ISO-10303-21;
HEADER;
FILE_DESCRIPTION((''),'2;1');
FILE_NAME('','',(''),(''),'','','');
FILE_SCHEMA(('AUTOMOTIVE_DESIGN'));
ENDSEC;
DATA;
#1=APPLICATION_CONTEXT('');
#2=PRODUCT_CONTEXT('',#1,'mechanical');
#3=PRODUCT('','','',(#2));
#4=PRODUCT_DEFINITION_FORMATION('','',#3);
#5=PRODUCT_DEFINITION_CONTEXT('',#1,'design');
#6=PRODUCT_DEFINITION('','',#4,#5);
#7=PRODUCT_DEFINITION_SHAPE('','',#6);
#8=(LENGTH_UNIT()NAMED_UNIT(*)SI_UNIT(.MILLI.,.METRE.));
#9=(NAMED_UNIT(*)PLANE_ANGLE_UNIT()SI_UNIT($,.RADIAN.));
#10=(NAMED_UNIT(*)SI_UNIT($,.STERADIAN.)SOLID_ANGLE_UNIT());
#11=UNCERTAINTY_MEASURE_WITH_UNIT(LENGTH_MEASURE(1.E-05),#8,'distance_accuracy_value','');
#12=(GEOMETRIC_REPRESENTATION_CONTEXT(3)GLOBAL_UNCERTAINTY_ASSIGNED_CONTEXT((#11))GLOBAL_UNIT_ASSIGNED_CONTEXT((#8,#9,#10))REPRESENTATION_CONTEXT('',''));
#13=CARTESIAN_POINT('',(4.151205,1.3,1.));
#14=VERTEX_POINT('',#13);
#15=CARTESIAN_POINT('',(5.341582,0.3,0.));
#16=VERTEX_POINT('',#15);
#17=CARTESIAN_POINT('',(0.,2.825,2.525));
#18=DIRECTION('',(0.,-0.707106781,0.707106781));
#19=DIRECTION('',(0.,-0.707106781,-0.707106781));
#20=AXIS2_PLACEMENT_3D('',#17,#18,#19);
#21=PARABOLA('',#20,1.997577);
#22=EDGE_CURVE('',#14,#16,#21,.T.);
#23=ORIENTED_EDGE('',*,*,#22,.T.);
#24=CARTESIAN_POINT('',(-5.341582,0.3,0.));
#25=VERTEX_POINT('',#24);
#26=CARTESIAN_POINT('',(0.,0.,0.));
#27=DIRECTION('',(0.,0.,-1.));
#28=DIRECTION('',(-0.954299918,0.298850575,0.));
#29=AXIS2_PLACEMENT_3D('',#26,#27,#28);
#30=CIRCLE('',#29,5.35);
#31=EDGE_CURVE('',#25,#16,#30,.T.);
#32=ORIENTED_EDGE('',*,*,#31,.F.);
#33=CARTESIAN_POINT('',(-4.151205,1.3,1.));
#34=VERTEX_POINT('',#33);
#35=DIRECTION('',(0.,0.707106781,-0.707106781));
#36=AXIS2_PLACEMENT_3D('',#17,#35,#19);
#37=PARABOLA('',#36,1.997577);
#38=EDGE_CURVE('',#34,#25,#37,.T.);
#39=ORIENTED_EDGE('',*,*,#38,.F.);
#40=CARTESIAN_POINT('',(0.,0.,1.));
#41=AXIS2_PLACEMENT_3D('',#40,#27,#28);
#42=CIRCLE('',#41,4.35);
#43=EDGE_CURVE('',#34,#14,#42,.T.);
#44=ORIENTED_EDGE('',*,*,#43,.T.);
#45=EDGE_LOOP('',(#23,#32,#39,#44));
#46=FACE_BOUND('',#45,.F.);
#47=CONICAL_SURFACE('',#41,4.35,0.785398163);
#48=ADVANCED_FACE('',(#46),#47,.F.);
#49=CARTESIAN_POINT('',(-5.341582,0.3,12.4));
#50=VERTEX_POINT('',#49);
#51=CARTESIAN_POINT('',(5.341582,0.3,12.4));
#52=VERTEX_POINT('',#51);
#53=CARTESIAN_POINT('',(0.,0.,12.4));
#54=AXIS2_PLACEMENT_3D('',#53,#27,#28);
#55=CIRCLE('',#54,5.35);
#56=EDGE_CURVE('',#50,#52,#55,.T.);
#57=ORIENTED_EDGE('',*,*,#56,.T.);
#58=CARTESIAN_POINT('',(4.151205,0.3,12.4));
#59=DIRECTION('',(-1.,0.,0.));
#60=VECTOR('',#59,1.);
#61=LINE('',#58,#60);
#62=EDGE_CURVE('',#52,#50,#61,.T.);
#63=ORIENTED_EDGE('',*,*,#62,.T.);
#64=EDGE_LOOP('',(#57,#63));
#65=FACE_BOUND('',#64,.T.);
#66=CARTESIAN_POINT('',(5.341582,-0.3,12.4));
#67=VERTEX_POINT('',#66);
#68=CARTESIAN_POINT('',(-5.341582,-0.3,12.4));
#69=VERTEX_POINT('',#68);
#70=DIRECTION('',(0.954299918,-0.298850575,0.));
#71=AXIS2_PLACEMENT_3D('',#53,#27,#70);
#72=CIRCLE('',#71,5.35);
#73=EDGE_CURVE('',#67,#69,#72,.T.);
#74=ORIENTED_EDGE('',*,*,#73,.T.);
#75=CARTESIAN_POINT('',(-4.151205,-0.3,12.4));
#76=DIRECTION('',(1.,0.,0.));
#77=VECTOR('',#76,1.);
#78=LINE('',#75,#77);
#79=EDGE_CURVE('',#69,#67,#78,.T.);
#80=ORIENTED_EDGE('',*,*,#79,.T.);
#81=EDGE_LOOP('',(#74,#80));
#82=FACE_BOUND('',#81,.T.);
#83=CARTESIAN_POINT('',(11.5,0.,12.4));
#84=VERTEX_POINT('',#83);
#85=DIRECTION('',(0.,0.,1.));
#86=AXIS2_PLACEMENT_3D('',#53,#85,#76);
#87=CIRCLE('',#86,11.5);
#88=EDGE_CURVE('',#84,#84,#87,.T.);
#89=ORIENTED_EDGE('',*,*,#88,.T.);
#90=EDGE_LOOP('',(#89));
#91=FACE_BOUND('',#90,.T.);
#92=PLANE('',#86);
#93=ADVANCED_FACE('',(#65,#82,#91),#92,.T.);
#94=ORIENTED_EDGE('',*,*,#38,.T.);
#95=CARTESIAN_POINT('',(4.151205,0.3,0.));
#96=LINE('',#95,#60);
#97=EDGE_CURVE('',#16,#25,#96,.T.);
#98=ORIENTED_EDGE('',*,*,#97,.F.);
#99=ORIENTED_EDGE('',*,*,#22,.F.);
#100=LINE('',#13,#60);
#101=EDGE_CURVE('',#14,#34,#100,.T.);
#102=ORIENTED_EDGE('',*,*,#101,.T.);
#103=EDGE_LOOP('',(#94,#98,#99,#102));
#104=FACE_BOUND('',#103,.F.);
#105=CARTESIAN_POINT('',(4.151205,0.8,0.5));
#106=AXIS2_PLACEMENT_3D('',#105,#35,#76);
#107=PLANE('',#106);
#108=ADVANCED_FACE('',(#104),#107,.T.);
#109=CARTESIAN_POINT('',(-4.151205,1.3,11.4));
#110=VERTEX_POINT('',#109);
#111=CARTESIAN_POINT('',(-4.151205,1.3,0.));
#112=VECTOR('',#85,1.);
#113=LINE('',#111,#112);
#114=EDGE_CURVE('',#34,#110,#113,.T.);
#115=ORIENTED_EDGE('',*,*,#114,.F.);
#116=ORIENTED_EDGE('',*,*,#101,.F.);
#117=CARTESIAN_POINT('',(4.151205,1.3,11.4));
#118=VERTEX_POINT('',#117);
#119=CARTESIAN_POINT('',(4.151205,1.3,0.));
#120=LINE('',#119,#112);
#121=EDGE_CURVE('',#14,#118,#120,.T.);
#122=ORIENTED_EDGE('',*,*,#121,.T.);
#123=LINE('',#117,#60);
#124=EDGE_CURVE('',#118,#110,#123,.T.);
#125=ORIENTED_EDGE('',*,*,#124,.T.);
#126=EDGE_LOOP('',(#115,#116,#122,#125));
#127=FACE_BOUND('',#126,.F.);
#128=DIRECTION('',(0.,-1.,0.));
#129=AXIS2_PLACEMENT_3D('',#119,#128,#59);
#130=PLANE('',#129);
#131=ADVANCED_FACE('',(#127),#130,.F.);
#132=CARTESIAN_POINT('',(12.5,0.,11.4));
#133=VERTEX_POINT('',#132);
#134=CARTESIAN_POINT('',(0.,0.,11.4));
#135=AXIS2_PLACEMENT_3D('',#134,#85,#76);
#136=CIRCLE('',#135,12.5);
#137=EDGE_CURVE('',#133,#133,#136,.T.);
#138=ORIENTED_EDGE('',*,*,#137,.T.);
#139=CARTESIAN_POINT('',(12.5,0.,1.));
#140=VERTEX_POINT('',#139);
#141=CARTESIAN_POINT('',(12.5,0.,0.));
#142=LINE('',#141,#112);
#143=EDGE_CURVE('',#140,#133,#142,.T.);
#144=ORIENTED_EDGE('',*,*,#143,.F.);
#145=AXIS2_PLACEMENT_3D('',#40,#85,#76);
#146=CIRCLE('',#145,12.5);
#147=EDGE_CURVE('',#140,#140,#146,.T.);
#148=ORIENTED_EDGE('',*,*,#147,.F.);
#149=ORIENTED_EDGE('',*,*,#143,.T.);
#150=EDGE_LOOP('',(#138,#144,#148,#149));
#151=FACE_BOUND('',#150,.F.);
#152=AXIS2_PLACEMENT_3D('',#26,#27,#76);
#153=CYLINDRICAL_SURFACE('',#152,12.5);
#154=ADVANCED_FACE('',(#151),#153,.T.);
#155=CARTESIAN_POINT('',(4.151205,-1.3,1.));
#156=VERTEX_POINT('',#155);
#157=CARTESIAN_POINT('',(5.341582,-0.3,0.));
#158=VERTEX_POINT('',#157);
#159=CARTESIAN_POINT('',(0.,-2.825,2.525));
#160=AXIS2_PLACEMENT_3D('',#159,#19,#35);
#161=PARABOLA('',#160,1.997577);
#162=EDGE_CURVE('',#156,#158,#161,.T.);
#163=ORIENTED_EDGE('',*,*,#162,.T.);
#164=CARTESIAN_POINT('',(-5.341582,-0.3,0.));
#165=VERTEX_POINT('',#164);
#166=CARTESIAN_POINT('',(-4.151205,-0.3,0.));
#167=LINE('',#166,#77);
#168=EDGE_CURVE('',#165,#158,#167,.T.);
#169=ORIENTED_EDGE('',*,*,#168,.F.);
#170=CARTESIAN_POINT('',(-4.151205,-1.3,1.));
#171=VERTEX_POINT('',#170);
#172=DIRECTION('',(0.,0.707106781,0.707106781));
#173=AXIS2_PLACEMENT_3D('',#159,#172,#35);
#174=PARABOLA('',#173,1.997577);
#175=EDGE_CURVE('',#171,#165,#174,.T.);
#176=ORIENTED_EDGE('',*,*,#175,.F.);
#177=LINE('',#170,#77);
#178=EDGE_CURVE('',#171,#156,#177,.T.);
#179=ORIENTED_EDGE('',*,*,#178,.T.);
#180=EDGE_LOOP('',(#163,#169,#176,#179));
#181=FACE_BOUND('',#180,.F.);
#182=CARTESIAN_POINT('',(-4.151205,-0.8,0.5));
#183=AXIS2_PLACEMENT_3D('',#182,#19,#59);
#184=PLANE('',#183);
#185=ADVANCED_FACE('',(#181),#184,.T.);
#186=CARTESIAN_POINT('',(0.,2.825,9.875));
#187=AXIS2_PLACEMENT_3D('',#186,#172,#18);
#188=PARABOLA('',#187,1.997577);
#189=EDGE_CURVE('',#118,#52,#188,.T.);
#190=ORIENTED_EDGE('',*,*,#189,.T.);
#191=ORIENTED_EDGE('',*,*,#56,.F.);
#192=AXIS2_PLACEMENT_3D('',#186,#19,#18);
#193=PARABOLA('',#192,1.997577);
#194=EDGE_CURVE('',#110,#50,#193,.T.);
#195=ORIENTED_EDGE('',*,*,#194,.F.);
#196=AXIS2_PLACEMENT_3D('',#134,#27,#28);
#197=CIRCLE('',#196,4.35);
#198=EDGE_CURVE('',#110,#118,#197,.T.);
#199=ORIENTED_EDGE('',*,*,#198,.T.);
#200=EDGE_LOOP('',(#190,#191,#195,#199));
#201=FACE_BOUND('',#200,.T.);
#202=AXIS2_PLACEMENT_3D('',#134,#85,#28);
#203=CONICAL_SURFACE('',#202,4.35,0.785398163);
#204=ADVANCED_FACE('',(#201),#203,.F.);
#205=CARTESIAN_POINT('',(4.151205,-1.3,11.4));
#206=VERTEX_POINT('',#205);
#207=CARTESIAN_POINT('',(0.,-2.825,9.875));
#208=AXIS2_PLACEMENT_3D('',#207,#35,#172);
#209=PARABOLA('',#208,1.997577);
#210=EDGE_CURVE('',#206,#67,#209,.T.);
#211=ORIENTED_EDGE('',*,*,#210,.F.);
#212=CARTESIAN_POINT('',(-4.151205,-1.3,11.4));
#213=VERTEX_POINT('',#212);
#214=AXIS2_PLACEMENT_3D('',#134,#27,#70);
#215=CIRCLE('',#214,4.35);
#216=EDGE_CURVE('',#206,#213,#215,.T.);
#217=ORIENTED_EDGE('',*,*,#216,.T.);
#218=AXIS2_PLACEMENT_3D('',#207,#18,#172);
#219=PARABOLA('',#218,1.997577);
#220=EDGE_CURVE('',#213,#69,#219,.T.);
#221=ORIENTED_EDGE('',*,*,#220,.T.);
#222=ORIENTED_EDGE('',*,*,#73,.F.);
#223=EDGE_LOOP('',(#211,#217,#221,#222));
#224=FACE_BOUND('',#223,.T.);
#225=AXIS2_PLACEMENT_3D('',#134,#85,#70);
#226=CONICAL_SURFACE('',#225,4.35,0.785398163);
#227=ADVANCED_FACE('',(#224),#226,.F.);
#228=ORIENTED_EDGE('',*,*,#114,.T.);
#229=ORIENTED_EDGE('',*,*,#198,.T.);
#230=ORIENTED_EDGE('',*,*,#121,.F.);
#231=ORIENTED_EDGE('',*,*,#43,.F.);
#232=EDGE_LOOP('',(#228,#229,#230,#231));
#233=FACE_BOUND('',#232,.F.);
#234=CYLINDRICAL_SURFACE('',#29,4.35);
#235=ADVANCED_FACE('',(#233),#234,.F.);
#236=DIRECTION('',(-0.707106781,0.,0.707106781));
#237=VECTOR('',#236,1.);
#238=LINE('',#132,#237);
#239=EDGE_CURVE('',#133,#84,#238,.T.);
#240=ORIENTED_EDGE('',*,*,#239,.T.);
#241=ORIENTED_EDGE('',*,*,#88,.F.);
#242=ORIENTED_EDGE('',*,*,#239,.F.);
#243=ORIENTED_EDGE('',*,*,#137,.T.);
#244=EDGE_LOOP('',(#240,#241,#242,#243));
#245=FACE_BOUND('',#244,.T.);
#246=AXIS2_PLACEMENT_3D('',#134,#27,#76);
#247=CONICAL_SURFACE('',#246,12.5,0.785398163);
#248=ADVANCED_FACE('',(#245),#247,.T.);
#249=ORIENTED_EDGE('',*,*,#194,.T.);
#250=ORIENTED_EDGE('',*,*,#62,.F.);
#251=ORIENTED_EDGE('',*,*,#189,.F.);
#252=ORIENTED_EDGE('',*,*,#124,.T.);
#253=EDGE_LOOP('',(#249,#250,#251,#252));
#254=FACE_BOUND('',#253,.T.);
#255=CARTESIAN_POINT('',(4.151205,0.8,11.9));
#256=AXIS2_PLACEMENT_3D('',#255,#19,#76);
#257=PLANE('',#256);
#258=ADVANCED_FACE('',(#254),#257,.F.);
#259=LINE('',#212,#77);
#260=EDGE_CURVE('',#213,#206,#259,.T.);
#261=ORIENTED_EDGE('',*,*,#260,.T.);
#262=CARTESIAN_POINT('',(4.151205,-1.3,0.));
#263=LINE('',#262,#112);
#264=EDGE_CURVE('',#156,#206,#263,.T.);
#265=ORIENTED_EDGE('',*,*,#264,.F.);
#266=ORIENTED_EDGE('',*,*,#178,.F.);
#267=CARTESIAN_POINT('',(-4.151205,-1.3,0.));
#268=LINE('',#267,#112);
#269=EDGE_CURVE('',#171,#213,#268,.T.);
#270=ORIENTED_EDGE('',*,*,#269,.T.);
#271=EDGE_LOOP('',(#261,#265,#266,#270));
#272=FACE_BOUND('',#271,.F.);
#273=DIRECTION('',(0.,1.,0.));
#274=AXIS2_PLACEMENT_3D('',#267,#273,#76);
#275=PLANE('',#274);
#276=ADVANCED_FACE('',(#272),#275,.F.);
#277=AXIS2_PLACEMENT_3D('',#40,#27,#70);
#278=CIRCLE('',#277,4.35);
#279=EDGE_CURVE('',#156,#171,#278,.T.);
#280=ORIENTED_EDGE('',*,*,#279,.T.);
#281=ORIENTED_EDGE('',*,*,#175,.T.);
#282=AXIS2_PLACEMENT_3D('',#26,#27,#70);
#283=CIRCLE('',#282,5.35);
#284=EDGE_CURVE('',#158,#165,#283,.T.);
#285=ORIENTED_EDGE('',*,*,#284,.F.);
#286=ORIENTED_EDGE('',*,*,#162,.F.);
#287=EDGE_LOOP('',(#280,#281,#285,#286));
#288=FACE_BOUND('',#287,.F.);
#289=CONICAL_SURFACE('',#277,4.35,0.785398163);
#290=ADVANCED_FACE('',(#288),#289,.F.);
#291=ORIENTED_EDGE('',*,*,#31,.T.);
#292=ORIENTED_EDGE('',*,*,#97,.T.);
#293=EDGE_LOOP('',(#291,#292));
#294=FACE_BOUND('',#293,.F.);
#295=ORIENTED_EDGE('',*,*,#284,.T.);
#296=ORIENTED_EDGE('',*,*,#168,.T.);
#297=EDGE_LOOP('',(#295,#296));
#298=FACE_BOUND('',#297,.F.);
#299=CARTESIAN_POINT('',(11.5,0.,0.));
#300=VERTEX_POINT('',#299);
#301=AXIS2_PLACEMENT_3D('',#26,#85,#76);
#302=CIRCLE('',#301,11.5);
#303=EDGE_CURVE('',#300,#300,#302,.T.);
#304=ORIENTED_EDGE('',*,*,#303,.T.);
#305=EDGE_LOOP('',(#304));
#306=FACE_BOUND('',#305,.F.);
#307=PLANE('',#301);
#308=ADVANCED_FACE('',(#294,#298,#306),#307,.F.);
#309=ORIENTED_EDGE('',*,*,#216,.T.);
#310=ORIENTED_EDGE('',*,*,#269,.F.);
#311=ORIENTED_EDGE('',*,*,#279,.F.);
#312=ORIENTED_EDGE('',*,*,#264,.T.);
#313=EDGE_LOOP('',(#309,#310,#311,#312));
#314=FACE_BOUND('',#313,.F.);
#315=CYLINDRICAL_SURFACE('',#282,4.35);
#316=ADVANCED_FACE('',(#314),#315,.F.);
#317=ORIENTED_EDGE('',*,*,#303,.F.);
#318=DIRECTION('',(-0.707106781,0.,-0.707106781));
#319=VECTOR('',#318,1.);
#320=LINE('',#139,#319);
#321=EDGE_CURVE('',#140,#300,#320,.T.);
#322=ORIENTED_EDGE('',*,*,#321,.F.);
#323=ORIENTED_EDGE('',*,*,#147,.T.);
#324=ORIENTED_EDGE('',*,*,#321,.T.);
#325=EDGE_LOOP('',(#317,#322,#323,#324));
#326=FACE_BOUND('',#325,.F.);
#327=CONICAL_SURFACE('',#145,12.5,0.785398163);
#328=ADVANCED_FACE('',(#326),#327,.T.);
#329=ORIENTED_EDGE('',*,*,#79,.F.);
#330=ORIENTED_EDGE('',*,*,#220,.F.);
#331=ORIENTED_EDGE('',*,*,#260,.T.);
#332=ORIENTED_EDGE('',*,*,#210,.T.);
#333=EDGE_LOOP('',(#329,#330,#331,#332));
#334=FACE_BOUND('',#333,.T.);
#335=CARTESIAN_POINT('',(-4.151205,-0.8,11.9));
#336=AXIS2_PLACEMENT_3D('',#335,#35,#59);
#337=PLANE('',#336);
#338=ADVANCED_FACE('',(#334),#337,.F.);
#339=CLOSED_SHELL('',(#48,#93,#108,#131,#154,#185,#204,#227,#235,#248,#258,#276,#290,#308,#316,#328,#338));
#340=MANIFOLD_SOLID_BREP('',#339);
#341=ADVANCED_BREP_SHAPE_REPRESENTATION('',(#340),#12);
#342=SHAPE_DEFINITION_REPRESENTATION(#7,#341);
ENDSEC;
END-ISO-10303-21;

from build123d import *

# Parameters (mm, degrees)
F0_R     = 12.5
F1_DEPTH = 12.4
F2_SIZE  = 1


with BuildPart() as f1:
    # F0 (on Top) → F1 (new body)
    with BuildSketch(Plane.XY):
        Circle(F0_R)
        with BuildLine():
            ThreePointArc((-4.1512046444, 1.3), (0, 4.35), (4.1512046444, 1.3))
            Line((4.1512046444, 1.3), (5, 1.3))
            Line((5, 1.3), (5, -1.3))
            Line((5, -1.3), (4.1512046444, -1.3))
            ThreePointArc((4.1512046444, -1.3), (0, -4.35), (-4.1512046444, -1.3))
            Line((-4.1512046444, -1.3), (-5, -1.3))
            Line((-5, -1.3), (-5, 1.3))
            Line((-5, 1.3), (-4.1512046444, 1.3))
        make_face(mode=Mode.SUBTRACT)
        with BuildLine():
            ThreePointArc((4.1512046444, -1.3), (4.3000139653, -0.657556004), (4.35, 0))
            ThreePointArc((4.35, 0), (4.3000139653, 0.657556004), (4.1512046444, 1.3))
            Line((4.1512046444, 1.3), (-4.1512046444, 1.3))
            ThreePointArc((-4.1512046444, 1.3), (-4.35, 0), (-4.1512046444, -1.3))
            Line((-4.1512046444, -1.3), (4.1512046444, -1.3))
        make_face()
        with BuildLine():
            ThreePointArc((4.1512046444, 1.3), (4.3000139653, 0.657556004), (4.35, 0))
            ThreePointArc((4.35, 0), (4.3000139653, -0.657556004), (4.1512046444, -1.3))
            Line((4.1512046444, -1.3), (5, -1.3))
            Line((5, -1.3), (5, 1.3))
            Line((5, 1.3), (4.1512046444, 1.3))
        make_face()
        with BuildLine():
            ThreePointArc((-4.1512046444, -1.3), (-4.35, 0), (-4.1512046444, 1.3))
            Line((-4.1512046444, 1.3), (-5, 1.3))
            Line((-5, 1.3), (-5, -1.3))
            Line((-5, -1.3), (-4.1512046444, -1.3))
        make_face()
    extrude(amount=F1_DEPTH)

    # F2
    f2_edges = [f1.edges().sort_by_distance(p)[0] for p in [
        (-12.5, 0, 12.4),
        (0, -4.35, 12.4),
        (0, -1.3, 12.4),
        (0, 1.3, 12.4),
        (0, 4.35, 12.4),
        (-12.5, 0, 0),
        (0, 1.3, 0),
        (0, 4.35, 0),
        (0, -1.3, 0),
        (0, -4.35, 0),
    ]]
    chamfer(f2_edges, length=F2_SIZE)


solid = f1.part
